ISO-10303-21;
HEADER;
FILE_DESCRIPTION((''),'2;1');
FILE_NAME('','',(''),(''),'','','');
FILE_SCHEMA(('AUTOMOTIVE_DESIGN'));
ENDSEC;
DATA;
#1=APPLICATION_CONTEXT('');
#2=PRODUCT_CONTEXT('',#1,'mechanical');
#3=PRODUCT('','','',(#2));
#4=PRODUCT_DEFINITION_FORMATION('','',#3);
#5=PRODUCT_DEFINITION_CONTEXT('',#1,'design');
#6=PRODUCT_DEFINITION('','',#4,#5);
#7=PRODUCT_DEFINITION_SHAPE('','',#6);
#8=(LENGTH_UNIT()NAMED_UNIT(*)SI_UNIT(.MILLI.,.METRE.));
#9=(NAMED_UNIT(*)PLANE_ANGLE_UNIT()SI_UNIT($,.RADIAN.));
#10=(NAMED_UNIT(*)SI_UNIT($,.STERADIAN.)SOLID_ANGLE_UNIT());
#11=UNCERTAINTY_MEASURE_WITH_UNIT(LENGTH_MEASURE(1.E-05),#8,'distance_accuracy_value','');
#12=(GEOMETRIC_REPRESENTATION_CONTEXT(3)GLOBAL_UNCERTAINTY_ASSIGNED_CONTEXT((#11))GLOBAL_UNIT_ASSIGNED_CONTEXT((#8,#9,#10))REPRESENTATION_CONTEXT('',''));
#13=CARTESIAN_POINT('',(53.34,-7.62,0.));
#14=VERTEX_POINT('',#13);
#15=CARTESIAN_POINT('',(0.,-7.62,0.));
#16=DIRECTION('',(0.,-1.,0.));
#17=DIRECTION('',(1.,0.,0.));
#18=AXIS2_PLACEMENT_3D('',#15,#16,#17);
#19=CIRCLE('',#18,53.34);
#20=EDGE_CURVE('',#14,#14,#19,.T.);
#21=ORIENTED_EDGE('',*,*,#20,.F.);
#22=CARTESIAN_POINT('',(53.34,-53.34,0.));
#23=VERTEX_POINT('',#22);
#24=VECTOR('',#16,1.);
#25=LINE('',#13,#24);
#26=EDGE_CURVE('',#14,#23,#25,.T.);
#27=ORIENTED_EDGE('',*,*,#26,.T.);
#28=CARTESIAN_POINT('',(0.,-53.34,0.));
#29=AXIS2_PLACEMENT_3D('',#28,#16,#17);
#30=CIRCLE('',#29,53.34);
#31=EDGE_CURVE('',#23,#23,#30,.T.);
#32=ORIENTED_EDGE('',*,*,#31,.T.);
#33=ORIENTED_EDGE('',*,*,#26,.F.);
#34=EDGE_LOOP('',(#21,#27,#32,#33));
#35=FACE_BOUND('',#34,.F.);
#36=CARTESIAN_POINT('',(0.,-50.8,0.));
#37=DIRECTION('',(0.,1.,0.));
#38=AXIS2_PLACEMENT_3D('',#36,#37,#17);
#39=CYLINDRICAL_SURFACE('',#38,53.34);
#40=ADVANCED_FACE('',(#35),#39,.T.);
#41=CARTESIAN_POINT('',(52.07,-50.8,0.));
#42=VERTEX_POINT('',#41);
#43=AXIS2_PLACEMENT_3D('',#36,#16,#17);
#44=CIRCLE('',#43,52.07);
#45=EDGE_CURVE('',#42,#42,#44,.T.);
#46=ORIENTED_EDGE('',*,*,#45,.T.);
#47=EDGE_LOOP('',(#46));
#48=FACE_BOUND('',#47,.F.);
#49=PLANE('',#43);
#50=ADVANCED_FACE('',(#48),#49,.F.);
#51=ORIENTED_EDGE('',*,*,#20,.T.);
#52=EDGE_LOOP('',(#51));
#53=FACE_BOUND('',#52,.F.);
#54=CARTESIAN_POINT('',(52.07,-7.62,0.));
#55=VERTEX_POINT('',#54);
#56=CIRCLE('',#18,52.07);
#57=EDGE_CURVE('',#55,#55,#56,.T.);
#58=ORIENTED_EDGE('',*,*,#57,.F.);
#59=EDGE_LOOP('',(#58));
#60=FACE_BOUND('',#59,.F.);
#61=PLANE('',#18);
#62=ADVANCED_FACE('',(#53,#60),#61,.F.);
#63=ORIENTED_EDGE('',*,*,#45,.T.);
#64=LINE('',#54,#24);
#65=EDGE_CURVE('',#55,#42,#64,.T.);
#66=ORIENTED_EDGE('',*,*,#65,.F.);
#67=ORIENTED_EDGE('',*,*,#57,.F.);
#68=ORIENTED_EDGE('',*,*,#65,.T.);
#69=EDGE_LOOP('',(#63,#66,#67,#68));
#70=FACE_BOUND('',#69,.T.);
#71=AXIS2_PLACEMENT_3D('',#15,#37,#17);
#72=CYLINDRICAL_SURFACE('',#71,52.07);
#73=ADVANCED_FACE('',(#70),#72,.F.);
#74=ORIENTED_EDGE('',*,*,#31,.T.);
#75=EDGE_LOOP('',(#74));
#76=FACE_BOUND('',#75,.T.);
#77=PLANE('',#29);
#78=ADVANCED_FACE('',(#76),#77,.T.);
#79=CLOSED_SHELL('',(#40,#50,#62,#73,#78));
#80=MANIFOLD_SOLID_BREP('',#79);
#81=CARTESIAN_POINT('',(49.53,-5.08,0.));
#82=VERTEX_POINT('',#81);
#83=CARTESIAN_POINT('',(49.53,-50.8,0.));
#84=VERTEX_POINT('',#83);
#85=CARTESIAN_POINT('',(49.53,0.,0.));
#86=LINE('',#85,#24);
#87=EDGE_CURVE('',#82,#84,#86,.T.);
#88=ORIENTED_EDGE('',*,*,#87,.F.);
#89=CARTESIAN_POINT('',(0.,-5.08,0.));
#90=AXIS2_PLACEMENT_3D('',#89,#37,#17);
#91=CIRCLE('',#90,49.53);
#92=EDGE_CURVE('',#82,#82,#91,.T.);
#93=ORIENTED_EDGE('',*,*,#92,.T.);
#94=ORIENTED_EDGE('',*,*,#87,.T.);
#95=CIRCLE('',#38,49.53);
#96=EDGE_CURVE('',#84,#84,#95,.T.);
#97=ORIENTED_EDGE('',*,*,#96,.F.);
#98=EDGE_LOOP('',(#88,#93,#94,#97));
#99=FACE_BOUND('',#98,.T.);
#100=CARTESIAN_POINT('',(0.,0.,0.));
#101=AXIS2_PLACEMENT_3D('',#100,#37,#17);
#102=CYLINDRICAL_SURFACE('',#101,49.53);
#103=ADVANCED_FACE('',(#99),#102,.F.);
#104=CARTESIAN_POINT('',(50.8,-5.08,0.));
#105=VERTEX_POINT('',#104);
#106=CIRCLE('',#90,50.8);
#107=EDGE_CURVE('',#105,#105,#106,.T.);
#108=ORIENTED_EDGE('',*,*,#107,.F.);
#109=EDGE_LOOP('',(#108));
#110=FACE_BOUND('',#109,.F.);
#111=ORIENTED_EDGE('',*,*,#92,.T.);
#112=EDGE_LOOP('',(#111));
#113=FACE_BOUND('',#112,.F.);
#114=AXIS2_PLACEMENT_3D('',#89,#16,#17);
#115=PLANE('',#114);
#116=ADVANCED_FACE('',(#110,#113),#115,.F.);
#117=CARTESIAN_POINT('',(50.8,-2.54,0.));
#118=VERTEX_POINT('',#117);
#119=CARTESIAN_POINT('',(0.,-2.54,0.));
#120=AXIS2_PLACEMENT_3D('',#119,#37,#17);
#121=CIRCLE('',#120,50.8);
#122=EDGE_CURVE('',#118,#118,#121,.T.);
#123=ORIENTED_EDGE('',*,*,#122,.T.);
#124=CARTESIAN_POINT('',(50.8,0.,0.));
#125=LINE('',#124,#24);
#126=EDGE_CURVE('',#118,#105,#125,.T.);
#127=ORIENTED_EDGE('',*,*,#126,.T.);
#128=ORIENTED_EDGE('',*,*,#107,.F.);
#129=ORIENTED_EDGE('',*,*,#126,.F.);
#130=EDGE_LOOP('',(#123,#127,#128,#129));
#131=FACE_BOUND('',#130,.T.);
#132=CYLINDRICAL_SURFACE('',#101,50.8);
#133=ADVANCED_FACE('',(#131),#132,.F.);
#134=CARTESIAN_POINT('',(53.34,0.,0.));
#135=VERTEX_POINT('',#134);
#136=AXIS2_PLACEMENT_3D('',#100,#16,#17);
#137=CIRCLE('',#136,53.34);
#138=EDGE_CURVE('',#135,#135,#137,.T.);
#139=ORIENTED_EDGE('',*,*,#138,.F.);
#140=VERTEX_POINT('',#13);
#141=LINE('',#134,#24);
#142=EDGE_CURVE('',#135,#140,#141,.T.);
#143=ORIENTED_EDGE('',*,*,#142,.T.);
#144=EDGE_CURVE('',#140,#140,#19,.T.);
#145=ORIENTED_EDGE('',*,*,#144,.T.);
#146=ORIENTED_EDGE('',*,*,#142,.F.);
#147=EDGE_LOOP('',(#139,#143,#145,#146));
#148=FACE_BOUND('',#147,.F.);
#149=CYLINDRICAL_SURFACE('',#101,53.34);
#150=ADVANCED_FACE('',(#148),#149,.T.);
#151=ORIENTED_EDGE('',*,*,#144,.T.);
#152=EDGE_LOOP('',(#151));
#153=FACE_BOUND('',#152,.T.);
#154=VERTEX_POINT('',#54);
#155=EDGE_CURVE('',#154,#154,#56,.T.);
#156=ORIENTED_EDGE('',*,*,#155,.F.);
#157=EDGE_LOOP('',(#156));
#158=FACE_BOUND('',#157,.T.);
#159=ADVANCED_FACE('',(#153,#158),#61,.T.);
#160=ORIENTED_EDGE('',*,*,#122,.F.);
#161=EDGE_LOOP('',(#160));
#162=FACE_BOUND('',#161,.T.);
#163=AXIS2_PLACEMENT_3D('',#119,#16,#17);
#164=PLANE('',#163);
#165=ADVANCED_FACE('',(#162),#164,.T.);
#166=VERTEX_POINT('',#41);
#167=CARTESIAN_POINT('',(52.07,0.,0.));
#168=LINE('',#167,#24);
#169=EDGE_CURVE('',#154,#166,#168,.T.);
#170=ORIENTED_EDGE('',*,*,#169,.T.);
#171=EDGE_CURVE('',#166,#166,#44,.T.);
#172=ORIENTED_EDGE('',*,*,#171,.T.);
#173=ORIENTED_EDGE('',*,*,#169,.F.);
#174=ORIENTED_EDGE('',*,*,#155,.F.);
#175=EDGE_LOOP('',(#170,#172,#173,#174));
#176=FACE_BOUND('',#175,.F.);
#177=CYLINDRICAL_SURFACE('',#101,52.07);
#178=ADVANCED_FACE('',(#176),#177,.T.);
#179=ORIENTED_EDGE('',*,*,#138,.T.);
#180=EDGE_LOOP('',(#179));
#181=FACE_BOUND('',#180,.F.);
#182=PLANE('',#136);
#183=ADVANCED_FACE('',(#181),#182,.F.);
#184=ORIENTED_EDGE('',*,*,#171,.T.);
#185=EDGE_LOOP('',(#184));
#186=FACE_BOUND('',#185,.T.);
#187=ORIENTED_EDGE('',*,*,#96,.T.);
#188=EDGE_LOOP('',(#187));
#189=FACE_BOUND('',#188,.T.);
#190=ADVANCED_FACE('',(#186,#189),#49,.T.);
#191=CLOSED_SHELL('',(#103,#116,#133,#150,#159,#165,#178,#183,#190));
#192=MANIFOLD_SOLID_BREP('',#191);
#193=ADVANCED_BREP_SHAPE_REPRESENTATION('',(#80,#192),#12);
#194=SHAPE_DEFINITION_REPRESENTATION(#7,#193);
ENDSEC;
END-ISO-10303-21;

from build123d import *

# Parameters (mm, degrees)
F2_R     = 52.07
F3_DEPTH = 50.8
F2_R_2   = 53.34
F0_DEPTH = 7.62
F1_DEPTH = 43.18
F4_T     = -2.54
F5_R     = 53.34
F6_DEPTH = 2.54


with BuildPart() as f3:
    # F2 (on Front) → F3 (new body)
    with BuildSketch(Plane.XZ):
        Circle(F2_R)
    extrude(amount=F3_DEPTH)

    # F2 (on Front) → F0 (join)
    with BuildSketch(Plane.XZ):
        Circle(F2_R_2)
        Circle(F2_R, mode=Mode.SUBTRACT)
    extrude(amount=F0_DEPTH)


with BuildPart() as f1:
    # F1 (new): a face of the model
    f1_faces = [f3.part.faces().sort_by_distance(p)[0] for p in [
        (-53.1891316972, -7.62, 0),
    ]]
    extrude(f1_faces, amount=F1_DEPTH)

    # F5 (on face) → F6 (join)
    with BuildSketch(Plane.XZ.offset(50.8)):
        Circle(F5_R)
    extrude(amount=F6_DEPTH)


with BuildPart() as f3_1:
    add(f3.part)

    # F4
    f4_openings = [f3_1.faces().sort_by_distance(p)[0] for p in [
        (0, -50.8, 0),
    ]]
    offset(amount=F4_T, openings=f4_openings, kind=Kind.INTERSECTION)


solid = Compound([f1.part, f3_1.part])
